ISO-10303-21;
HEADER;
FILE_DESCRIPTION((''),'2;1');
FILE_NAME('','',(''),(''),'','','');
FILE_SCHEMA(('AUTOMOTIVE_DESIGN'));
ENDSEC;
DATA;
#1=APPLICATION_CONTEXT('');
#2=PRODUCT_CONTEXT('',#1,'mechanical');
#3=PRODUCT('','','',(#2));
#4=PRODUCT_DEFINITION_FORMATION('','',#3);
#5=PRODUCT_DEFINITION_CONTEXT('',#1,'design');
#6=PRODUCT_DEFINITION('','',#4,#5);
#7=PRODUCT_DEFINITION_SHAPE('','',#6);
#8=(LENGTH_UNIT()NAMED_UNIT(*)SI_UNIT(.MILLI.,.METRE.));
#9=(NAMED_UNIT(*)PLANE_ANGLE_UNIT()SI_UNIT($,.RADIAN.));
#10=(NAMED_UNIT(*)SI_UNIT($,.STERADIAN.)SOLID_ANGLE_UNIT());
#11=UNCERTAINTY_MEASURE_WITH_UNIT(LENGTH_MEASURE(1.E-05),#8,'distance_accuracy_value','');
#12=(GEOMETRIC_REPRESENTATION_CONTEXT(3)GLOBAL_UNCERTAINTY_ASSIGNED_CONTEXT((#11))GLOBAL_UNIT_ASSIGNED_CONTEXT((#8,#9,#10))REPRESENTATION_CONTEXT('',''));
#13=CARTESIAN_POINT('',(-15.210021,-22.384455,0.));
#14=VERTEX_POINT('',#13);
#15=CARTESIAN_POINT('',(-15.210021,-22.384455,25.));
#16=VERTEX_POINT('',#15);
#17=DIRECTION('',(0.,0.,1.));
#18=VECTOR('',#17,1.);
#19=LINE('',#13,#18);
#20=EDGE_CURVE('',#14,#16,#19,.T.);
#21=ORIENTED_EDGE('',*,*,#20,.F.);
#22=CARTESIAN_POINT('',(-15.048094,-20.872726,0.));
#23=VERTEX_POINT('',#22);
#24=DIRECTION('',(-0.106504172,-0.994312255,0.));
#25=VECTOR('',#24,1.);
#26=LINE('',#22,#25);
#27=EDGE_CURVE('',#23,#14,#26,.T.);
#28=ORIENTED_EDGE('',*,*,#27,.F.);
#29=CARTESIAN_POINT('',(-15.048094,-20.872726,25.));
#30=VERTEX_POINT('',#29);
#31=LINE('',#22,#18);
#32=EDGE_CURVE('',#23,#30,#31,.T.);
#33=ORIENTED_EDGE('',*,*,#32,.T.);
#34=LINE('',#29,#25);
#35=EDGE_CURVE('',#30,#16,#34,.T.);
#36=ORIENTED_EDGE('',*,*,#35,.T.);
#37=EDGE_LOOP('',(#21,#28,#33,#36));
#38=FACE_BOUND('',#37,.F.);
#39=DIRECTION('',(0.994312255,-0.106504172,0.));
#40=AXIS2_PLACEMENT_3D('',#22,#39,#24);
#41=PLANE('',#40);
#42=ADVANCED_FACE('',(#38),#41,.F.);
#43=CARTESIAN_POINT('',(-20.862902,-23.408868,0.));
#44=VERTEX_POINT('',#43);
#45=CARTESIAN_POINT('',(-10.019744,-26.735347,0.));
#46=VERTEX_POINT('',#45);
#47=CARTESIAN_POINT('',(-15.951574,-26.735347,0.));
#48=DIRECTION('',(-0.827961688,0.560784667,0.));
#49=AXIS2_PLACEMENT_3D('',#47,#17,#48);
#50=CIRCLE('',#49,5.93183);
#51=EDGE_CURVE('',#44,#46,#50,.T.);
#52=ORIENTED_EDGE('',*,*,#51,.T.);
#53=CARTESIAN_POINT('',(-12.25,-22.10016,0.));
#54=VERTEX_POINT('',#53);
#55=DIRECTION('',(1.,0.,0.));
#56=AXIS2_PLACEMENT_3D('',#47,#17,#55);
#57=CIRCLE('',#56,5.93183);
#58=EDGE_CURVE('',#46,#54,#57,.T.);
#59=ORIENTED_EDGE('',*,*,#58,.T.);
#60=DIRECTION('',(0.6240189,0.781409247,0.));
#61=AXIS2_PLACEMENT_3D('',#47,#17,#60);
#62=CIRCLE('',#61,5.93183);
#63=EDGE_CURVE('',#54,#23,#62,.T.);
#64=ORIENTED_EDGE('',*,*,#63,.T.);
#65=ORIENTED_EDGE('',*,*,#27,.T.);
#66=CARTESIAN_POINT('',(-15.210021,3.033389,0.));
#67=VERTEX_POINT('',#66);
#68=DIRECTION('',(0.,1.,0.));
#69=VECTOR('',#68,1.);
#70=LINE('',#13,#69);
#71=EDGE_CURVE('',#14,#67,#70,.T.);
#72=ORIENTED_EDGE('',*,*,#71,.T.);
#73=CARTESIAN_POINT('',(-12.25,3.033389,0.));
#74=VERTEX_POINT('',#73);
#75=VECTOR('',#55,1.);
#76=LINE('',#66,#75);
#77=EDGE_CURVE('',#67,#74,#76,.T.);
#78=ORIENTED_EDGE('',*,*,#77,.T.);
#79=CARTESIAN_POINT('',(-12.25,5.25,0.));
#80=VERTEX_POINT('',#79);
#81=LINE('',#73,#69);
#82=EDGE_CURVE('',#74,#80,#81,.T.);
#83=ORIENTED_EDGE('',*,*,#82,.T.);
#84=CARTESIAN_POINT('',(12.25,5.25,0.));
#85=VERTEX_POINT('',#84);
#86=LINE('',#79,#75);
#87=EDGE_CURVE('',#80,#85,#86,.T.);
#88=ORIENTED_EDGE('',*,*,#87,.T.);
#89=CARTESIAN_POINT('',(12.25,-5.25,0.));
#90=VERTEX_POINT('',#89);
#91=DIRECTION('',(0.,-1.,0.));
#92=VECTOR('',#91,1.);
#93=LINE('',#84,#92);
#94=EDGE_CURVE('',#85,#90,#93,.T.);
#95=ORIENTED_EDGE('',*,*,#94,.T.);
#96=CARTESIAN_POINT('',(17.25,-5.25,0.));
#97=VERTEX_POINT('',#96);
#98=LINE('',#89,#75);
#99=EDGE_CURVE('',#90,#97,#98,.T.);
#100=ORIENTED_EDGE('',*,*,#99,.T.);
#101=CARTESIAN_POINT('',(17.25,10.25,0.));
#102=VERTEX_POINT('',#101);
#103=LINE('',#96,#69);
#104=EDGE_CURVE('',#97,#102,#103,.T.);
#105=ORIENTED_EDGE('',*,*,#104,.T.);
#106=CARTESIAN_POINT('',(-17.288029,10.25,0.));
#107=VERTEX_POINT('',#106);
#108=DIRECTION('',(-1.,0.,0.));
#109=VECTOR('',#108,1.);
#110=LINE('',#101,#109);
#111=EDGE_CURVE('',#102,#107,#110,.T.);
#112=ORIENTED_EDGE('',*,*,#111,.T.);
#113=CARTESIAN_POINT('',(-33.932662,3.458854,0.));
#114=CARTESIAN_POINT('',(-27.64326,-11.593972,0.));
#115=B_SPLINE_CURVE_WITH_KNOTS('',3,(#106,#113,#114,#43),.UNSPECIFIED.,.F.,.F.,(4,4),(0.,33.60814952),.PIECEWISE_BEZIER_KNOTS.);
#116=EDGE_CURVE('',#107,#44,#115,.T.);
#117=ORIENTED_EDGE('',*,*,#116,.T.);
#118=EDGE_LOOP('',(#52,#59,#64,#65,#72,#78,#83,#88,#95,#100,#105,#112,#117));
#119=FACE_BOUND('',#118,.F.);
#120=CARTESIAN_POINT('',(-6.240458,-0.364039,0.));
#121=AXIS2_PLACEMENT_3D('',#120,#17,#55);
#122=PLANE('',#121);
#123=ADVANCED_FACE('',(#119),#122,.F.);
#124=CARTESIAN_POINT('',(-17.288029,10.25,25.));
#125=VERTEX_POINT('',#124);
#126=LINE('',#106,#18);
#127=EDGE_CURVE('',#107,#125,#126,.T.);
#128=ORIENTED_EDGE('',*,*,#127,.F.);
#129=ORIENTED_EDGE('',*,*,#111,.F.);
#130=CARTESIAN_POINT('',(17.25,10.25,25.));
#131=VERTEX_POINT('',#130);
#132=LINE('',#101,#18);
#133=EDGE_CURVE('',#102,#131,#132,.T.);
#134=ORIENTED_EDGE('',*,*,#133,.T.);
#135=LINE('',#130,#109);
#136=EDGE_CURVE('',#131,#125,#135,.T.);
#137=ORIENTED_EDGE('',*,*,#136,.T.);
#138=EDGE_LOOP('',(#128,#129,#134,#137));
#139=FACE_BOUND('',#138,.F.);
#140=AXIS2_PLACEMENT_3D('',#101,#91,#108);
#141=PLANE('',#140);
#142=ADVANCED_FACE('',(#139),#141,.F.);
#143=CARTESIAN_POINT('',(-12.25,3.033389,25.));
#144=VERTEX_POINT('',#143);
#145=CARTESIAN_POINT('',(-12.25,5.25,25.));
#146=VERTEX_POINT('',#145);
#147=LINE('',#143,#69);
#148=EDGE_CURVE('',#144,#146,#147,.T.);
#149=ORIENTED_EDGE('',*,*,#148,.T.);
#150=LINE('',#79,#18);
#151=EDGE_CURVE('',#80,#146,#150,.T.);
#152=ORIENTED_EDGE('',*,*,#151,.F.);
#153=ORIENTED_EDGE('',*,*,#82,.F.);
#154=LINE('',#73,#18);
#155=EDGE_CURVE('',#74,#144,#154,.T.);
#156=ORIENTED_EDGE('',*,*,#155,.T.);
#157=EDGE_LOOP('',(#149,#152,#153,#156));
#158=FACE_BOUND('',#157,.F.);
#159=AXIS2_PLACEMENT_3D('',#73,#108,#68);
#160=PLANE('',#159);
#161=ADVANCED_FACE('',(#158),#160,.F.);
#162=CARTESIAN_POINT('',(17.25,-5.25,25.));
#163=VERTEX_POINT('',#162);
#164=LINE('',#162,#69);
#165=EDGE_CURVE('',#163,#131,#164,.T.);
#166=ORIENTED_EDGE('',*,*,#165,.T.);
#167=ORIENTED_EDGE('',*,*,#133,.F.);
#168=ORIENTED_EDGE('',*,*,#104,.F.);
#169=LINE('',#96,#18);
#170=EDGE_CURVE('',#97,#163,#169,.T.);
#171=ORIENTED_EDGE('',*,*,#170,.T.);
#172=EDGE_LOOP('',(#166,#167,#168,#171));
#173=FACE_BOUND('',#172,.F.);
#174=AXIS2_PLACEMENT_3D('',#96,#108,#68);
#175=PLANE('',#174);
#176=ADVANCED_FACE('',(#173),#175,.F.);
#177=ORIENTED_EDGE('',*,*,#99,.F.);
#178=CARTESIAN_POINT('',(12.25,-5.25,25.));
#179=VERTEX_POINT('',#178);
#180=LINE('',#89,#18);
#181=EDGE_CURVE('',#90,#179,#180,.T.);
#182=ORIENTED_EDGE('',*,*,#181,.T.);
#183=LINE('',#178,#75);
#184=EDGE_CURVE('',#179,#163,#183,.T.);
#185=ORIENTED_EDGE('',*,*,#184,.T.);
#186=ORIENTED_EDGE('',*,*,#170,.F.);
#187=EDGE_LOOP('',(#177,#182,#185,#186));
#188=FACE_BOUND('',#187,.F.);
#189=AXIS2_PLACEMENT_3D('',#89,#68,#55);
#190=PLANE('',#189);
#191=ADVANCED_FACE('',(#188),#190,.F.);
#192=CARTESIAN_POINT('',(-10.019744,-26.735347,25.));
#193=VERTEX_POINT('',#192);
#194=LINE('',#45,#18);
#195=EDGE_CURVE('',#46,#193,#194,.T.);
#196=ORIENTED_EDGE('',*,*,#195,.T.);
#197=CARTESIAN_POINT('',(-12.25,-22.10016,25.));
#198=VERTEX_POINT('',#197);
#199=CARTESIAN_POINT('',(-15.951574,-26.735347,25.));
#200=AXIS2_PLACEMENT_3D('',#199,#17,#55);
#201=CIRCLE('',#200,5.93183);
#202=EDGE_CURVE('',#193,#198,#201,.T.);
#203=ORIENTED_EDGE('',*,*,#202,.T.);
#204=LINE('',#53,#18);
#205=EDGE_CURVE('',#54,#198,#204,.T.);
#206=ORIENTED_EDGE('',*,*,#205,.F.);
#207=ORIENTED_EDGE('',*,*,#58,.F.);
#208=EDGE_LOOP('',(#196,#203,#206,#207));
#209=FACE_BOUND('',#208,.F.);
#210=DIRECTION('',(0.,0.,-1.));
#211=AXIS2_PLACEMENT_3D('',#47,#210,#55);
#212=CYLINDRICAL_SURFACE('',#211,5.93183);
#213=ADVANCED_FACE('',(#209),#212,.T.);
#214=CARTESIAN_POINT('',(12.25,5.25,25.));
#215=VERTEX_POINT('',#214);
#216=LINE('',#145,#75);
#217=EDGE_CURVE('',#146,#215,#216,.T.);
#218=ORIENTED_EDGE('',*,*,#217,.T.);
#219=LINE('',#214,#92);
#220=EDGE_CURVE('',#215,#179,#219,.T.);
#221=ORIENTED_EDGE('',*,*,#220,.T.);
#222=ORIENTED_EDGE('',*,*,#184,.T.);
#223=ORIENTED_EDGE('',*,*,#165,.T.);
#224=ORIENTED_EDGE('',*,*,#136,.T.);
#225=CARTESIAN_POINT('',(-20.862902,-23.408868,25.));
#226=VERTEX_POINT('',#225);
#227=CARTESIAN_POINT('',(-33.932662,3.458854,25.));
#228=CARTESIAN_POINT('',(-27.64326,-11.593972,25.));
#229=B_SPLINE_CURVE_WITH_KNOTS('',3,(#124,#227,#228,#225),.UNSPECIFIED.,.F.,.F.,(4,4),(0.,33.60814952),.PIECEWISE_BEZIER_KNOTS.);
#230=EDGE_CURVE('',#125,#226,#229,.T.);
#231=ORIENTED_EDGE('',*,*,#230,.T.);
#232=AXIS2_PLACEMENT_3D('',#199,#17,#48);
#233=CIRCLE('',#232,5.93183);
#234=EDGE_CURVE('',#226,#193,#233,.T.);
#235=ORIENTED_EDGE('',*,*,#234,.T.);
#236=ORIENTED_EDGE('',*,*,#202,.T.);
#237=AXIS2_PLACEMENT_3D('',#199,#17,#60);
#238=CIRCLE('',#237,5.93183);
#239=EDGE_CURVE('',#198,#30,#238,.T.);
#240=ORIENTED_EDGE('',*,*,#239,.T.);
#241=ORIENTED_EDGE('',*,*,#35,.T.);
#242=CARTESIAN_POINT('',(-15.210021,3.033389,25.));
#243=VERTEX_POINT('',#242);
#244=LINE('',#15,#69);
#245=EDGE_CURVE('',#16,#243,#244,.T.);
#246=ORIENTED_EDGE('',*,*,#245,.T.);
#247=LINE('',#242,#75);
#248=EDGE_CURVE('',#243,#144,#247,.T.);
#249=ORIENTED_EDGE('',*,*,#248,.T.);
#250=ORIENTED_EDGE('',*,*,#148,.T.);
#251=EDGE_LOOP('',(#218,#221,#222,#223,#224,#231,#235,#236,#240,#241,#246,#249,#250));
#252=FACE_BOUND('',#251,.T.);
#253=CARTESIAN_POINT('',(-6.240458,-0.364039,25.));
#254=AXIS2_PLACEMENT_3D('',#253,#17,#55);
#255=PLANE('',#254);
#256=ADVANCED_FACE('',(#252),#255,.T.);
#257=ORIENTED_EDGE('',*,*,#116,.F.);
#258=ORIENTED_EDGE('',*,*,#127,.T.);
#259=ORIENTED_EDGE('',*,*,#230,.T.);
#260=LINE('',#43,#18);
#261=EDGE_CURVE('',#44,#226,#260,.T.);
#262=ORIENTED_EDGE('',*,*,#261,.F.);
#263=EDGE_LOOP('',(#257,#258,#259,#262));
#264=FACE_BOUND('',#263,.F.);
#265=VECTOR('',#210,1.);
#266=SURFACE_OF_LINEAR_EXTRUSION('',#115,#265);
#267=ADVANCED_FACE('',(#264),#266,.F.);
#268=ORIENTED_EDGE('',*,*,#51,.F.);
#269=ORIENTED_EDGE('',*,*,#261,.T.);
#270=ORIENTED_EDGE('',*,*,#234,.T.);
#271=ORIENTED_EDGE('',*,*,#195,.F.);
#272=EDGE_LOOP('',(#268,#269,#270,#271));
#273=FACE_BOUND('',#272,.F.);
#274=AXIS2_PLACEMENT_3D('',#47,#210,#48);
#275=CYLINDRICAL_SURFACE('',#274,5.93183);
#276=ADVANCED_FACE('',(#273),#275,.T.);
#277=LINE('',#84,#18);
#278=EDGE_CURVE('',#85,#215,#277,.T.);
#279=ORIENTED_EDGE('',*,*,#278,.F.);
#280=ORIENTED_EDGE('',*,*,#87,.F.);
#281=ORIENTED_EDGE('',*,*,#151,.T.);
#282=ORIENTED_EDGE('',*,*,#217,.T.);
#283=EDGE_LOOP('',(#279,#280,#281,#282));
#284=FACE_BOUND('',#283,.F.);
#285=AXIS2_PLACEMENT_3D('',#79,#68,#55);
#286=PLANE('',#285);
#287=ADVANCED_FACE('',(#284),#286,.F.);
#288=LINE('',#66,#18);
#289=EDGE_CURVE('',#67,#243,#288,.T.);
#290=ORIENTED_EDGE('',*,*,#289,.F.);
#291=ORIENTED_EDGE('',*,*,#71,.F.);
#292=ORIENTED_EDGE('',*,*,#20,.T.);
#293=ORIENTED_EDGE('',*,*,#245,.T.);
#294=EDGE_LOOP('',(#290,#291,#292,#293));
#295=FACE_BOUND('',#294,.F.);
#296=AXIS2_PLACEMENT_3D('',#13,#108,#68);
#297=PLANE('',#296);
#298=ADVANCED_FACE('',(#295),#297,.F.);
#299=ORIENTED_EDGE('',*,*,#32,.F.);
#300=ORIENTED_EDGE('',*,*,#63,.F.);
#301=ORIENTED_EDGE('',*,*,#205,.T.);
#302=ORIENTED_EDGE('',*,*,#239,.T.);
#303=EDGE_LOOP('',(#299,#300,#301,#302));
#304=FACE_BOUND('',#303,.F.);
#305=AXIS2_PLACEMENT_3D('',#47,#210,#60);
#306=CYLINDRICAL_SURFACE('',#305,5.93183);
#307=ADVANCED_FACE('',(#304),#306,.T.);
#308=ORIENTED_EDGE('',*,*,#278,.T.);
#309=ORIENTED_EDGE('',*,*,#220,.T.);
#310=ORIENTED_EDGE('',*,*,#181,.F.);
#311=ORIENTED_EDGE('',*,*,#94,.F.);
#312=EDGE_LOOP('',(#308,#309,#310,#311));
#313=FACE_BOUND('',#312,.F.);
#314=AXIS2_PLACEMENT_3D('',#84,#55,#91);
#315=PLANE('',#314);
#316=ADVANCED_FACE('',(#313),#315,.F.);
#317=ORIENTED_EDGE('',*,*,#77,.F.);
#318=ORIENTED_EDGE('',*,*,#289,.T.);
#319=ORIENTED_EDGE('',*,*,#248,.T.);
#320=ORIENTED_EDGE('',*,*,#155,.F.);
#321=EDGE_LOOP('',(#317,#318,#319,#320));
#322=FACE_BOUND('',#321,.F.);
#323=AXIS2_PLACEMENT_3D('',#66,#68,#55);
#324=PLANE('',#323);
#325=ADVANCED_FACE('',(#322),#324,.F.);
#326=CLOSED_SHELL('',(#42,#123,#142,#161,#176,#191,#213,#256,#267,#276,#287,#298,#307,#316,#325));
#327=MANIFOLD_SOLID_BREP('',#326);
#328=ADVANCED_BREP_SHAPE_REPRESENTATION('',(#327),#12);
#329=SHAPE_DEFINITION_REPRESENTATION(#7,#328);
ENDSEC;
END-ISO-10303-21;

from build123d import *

# Parameters (mm, degrees)
F1_DEPTH = 25


# Not quite as in the source:
# - a feature names something its author has since deleted; it is built from what else it names


with BuildPart() as f1:
    # F0 (on Top) → F1 (new body)
    with BuildSketch(Plane.XY):
        with BuildLine():
            Line((12.25, 5.25), (12.25, -5.25))
            Line((12.25, -5.25), (17.25, -5.25))
            Line((17.25, -5.25), (17.25, 10.25))
            Line((17.25, 10.25), (-17.288029389, 10.25))
            add(Edge.make_bspline(
                [(-17.288029389, 10.25), (-33.9326616892, 3.4588538136), (-27.6432598671, -11.5939724111), (-20.8629015828, -23.4088676175)],
                knots=[0, 0, 0, 0, 33.6081495202, 33.6081495202, 33.6081495202, 33.6081495202], degree=3))
            ThreePointArc((-20.8629015828, -23.4088676175), (-18.8330680728, -21.5504075494), (-16.1829780698, -20.8080323883))
            ThreePointArc((-16.1829780698, -20.8080323883), (-15.6956355504, -20.8090410674), (-15.2100205721, -20.8500513288))
            Line((-15.2100205721, -20.8500513288), (-15.2100205721, 3.0333888489))
            Line((-15.2100205721, 3.0333888489), (-12.4874287694, 3.0333888489))
            Line((-12.4874287694, 3.0333888489), (-12.25, 5.25))
            Line((-12.25, 5.25), (12.25, 5.25))
        make_face()
        Polygon((-12.4874287694, 3.0333888489), (-12.25, 3.0333888489), (-12.25, 5.25), align=None)
        with BuildLine():
            ThreePointArc((-10.0197441457, -26.7353467643), (-10.6063091532, -24.1634313379), (-12.25, -22.1001601804))
            ThreePointArc((-12.25, -22.1001601804), (-13.5686599523, -21.3031901955), (-15.0480940947, -20.872725511))
            Line((-15.0480940947, -20.872725511), (-15.2100205721, -22.3844548448))
            Line((-15.2100205721, -22.3844548448), (-15.2100205721, -20.8500513288))
            ThreePointArc((-15.2100205721, -20.8500513288), (-15.6956355504, -20.8090410674), (-16.1829780698, -20.8080323883))
            ThreePointArc((-16.1829780698, -20.8080323883), (-18.8330680728, -21.5504075494), (-20.8629015828, -23.4088676175))
            ThreePointArc((-20.8629015828, -23.4088676175), (-17.691321516, -32.4063150838), (-10.0197441457, -26.7353467643))
        make_face()
    extrude(amount=F1_DEPTH)


solid = f1.part
